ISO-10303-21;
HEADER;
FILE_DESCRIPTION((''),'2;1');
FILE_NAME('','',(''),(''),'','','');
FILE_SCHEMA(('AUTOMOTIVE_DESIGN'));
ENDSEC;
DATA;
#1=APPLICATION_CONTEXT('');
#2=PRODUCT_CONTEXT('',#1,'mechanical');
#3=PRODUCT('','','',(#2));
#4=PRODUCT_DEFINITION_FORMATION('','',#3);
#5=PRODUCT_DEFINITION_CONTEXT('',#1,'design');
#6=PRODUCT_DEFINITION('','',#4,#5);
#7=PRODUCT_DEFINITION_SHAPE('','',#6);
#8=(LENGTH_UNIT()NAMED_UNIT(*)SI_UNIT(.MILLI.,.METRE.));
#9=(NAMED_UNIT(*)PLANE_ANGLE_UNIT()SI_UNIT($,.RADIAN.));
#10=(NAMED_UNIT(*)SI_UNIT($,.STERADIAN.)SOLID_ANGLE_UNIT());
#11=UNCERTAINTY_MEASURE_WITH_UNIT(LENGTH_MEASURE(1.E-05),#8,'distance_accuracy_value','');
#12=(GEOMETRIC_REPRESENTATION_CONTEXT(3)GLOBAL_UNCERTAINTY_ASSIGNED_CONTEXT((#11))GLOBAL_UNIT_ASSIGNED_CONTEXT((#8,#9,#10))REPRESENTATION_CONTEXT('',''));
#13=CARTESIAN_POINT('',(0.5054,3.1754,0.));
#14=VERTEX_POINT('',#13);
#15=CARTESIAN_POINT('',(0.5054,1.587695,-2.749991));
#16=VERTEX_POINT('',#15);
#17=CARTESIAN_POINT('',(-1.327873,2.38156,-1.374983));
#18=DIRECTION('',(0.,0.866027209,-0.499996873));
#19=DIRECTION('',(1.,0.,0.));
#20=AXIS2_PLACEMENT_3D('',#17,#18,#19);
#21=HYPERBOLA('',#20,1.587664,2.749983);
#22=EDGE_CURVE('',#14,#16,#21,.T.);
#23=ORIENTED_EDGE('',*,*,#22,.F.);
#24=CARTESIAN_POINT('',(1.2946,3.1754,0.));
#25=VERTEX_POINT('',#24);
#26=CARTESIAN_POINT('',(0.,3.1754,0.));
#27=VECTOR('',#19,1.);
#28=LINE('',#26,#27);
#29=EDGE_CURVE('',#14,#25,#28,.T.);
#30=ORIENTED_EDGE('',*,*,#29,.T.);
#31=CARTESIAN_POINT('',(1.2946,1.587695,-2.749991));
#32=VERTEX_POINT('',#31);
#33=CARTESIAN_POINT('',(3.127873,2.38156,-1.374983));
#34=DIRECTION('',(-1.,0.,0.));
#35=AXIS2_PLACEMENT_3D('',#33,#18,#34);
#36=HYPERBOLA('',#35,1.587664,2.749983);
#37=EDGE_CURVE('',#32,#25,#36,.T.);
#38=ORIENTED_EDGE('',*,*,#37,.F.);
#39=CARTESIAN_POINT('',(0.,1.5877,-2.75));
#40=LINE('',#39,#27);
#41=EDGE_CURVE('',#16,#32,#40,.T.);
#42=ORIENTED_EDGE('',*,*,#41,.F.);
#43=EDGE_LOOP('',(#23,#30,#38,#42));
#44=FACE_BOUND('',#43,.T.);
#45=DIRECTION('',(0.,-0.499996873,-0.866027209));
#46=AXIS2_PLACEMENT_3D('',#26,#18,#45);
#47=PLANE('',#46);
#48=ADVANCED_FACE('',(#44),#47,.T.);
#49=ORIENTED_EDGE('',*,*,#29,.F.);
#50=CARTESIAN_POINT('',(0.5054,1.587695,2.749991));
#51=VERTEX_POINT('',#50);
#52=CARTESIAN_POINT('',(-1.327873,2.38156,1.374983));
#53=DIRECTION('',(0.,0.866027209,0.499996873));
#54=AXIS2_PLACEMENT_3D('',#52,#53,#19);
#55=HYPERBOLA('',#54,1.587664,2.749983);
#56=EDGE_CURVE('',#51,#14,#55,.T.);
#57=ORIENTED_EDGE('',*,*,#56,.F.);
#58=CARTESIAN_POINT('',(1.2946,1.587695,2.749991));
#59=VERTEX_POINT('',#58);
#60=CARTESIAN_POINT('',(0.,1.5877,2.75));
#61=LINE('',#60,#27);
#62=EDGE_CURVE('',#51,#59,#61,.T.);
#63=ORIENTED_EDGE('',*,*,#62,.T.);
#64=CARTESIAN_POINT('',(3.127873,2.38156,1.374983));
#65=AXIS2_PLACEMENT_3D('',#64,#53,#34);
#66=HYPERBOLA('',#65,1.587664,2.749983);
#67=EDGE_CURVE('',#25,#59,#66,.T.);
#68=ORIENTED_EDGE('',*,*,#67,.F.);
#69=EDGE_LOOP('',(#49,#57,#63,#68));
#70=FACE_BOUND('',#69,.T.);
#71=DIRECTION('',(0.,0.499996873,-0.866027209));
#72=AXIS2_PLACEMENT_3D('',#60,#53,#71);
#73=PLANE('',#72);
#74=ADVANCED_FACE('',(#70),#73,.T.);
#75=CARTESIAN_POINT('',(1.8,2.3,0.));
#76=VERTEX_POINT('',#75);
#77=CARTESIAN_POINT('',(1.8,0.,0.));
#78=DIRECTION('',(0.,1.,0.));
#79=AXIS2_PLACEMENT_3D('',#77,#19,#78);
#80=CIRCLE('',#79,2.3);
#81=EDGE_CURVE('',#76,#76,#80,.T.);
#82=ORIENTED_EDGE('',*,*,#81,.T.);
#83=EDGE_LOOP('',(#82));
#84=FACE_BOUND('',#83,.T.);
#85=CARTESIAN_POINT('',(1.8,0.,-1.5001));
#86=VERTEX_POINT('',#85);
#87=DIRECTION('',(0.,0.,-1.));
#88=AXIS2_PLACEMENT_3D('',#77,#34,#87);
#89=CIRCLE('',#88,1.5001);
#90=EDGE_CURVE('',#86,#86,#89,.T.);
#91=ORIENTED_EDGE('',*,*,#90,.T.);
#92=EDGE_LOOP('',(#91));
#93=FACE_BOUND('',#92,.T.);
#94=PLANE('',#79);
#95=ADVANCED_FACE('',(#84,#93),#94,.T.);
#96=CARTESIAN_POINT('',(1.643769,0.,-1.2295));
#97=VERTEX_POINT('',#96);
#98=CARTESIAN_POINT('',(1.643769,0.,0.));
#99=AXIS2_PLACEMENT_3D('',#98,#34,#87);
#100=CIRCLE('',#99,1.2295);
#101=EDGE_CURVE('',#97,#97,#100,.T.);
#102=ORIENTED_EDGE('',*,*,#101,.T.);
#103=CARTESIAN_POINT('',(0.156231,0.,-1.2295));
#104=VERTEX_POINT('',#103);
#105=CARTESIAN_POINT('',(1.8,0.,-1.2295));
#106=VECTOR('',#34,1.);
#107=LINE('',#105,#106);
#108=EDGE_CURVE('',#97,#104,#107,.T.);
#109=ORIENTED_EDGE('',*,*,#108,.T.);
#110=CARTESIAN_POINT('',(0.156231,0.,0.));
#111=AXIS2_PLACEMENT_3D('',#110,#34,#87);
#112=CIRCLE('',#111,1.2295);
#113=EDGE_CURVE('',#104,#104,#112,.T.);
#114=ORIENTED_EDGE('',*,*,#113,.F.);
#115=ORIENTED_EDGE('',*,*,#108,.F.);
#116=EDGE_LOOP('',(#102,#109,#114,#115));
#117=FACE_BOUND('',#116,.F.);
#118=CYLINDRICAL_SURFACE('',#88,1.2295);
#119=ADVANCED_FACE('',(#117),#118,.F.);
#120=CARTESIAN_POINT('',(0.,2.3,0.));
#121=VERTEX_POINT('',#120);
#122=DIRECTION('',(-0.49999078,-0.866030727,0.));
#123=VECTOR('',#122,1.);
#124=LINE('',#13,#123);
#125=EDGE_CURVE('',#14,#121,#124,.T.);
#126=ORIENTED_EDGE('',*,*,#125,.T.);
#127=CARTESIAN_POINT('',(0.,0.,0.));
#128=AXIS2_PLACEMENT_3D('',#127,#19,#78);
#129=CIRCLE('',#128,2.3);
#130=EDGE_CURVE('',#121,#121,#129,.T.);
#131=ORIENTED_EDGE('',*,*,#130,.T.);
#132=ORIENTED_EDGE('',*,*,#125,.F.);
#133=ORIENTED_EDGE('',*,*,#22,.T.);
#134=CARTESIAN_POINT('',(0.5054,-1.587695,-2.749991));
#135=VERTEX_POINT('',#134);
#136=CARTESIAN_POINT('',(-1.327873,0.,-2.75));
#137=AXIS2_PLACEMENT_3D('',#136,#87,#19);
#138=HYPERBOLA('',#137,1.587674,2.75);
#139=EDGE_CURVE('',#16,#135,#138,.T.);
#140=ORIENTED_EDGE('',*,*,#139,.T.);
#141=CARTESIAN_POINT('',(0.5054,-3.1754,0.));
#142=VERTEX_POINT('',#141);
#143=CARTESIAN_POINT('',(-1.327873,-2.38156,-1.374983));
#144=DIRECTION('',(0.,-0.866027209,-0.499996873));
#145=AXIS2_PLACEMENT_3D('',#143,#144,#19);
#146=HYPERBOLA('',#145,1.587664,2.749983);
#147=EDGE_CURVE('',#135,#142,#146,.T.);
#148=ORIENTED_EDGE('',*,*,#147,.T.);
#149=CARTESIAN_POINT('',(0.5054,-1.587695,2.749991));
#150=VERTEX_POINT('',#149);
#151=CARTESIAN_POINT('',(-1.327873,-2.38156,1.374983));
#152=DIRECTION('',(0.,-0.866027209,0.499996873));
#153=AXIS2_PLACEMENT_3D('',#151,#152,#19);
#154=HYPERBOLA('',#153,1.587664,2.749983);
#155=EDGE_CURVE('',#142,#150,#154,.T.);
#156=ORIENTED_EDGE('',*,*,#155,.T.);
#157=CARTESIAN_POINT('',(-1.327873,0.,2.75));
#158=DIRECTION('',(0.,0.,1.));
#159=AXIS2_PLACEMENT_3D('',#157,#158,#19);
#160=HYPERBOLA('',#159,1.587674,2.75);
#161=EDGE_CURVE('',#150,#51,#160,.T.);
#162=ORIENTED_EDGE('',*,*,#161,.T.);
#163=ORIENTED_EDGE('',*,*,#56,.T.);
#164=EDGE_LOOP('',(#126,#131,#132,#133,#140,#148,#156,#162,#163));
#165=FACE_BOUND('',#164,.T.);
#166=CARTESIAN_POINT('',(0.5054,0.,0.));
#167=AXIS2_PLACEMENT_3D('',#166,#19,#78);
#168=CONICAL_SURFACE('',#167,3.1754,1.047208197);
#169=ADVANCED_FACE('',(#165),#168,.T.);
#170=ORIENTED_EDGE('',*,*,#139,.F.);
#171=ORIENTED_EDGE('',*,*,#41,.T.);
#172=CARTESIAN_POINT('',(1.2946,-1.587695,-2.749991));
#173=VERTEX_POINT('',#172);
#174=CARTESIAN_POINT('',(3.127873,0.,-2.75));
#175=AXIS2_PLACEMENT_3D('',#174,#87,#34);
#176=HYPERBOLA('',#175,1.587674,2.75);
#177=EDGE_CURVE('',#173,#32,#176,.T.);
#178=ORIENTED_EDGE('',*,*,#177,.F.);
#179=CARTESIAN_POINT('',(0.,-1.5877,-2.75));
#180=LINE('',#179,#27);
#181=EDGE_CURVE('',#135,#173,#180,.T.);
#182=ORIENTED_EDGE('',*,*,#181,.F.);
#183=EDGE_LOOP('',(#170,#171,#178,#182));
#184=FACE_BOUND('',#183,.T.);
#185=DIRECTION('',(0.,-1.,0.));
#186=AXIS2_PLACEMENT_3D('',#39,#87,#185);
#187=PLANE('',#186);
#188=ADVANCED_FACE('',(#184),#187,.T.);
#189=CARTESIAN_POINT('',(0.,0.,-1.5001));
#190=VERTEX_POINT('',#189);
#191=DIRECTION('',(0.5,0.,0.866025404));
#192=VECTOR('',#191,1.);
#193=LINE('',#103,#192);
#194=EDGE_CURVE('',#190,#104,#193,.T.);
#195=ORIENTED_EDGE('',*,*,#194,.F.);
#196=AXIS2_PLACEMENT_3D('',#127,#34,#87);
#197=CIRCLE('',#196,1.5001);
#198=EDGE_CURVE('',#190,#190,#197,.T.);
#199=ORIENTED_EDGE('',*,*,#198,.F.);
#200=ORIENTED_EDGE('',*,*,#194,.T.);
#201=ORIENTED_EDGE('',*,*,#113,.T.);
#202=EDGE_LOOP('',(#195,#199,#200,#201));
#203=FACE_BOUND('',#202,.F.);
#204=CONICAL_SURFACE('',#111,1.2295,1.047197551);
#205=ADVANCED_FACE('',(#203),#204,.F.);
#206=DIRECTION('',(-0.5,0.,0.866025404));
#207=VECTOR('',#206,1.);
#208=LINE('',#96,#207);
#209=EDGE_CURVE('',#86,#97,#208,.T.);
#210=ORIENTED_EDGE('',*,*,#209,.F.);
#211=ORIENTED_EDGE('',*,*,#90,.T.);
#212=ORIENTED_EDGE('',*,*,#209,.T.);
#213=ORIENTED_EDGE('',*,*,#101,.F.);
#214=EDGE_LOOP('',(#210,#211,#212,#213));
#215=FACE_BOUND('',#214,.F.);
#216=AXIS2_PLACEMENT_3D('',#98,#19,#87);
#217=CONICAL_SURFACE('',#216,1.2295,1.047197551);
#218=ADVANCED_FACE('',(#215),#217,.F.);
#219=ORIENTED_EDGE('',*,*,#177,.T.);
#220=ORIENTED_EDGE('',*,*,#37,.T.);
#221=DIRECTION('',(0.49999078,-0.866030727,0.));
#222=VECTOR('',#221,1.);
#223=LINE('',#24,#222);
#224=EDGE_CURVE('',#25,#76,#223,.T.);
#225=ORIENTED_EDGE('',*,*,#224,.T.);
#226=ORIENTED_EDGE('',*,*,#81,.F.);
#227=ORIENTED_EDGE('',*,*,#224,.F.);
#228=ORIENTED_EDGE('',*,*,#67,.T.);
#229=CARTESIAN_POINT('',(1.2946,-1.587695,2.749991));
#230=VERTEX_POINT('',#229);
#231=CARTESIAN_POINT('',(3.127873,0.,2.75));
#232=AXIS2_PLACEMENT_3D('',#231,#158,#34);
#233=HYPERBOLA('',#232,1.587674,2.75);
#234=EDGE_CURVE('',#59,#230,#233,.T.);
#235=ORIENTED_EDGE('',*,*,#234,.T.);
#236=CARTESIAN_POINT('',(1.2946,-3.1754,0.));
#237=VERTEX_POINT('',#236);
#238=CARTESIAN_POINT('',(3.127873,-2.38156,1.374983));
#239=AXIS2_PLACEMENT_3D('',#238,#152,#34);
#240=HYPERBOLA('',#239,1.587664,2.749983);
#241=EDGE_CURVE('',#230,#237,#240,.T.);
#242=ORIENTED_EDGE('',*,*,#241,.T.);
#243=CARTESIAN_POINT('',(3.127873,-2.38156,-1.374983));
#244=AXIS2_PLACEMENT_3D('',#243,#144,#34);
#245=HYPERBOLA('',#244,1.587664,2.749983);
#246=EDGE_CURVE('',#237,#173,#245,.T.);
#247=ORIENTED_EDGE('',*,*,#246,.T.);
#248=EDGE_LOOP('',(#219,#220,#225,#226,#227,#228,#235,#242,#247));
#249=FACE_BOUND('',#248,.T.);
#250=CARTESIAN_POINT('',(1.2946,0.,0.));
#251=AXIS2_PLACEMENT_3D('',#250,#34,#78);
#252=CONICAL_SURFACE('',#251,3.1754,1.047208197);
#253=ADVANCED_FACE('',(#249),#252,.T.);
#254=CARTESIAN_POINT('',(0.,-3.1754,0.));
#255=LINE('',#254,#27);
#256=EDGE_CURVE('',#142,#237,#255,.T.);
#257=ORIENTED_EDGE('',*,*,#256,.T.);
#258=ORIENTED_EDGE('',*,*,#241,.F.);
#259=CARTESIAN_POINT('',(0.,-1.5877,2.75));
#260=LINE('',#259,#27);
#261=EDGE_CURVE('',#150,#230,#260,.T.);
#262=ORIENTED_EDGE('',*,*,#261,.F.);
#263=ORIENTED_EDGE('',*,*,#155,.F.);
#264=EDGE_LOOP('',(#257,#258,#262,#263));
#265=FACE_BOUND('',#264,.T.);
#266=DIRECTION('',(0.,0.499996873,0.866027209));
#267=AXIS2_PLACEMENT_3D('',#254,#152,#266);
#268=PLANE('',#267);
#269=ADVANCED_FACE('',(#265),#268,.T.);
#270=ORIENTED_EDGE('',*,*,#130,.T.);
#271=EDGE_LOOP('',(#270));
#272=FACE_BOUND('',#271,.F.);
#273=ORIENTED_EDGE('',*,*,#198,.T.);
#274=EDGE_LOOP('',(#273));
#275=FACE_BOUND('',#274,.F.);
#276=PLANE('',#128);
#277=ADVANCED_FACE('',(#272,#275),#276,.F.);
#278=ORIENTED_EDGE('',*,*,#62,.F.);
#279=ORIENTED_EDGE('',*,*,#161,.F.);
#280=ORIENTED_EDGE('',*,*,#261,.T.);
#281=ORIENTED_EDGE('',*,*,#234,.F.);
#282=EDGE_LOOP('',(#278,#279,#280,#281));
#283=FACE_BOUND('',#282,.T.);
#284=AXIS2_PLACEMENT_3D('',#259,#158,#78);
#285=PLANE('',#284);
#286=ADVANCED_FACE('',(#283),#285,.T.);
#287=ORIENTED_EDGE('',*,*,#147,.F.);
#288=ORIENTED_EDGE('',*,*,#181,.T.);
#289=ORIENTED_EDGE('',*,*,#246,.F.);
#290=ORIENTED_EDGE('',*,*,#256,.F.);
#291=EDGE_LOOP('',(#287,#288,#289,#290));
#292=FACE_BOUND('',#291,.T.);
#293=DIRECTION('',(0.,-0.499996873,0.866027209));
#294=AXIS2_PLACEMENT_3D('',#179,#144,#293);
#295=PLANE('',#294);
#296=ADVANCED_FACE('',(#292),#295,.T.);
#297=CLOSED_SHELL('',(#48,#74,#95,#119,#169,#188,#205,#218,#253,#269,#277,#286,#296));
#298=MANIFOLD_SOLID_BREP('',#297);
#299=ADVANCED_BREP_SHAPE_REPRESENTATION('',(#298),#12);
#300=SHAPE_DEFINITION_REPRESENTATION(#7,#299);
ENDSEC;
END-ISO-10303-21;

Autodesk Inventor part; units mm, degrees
ref_plane "YZ Plane" through (0, 0, 0) normal (1, 0, 0) x (0, 1, 0)
ref_plane "XZ Plane" through (0, 0, 0) normal (0, 1, 0) x (-1, 0, 0)
sketch "Sketch1" plane through (0, 0, 0) normal (1, 0, 0) x (0, 1, 0)
  line L0 (-3.1754, 0) -> (-1.5877, 2.75)
  line L1 (-1.5877, 2.75) -> (1.5877, 2.75)
  line L2 (1.5877, 2.75) -> (3.1754, 0)
  line L3 (3.1754, 0) -> (1.5877, -2.75)
  line L4 (1.5877, -2.75) -> (-1.5877, -2.75)
  line L5 (-1.5877, -2.75) -> (-3.1754, 0)
  point P0 (0, 0)
  point P1 (0, 0)
  dimension "d0" = 6.3509
extrude "Body" add sketch "Sketch1" along normal blind 1.8
sketch "Sketch2" plane through (0, 0, 0) normal (0, 0, 1) x (1, 0, 0)
  line L0 (0, 1.5877) -> (0, 3.1754) projected
  line L1 (0, 3.1754) -> (1.8, 3.1754) projected
  line L2 (1.8, 1.5877) -> (1.8, 3.1754) projected
  line L3 (-0.36, 0) -> (2.16, 0) projected
  line L4 (0.5054, 3.1754) -> (0, 2.3)
  line L5 (1.2946, 3.1754) -> (1.8, 2.3)
  dimension "d3" = 30
  dimension "d4" = 30
  dimension "d5" = 4.6
  dimension "d6" = 4.6
revolve "Chamfer1" cut sketch "Sketch2" angle 360 about axis through (-10, 0, 0) along (1, 0, 0)
sketch "Sketch3" plane through (1.8, 0, 0) normal (1, 0, 0) x (0, 0, -1)
  arc A0 (-0.625, -1.0825) -> (0.625, -1.0825) centre (0, 0) ccw projected
hole "Thread" at (1.8, 0, 0) direction (-1, 0, 0) diameter 2.459 end through all thread size "M3x0.5" class "6H" standard "ISO Metric profile"
chamfer "Chamfer2" distance 0.2706 angle 30 1 edges at (1.8, 0, 1.2295) measured on face at (1.8, 1.9179, -0.2329)
chamfer "Chamfer3" distance 0.2706 angle 30 1 edges at (0, 0, 1.2295) measured on face at (0, 1.9179, -0.2329)
ref_plane "Work Plane1" through (-6.7921, 0, 0) normal (0, -0.8660254, -0.5) x (1, 0, 0)
equation "\"d0\" = 1.1547 * SW"
equation "\"d1\" = KOH"
equation "\"d3\" = ANG1"
equation "\"d4\" = ANG2"
equation "\"d5\" = SW0"
equation "\"d6\" = SW01"
equation "\"d8\" = -0.5 * GD1 + 0.5 * NND"
equation "\"d40\" = -0.5 * GD1 + 0.5 * NND"
equation "\"d10\" = -0.5 * GD1 + 0.5 * NND"
equation "\"d41\" = -0.5 * GD1 + 0.5 * NND"
equation "\"ANG1\" = 30deg"
equation "\"ANG2\" = 30deg"
equation "\"NND\" = 3"
equation "\"KOH\" = 1.8"
equation "\"SW\" = 5.5"
equation "\"SW0\" = 4.6"
equation "\"SW01\" = SW0"
equation "\"GUL\" = 0.541266 * PTC"
equation "\"THREADDIA\" = 3"
equation "\"TOA\" = 30deg"
equation "\"PTC\" = 0.5"
equation "\"E0\" = 1.155 * SW"
equation "\"GAL\" = 0.541266 * PTC"
equation "\"GD1\" = 2.458734"
properties part number "ISO 4035 - M3" material "Stainless Steel, 440C"
